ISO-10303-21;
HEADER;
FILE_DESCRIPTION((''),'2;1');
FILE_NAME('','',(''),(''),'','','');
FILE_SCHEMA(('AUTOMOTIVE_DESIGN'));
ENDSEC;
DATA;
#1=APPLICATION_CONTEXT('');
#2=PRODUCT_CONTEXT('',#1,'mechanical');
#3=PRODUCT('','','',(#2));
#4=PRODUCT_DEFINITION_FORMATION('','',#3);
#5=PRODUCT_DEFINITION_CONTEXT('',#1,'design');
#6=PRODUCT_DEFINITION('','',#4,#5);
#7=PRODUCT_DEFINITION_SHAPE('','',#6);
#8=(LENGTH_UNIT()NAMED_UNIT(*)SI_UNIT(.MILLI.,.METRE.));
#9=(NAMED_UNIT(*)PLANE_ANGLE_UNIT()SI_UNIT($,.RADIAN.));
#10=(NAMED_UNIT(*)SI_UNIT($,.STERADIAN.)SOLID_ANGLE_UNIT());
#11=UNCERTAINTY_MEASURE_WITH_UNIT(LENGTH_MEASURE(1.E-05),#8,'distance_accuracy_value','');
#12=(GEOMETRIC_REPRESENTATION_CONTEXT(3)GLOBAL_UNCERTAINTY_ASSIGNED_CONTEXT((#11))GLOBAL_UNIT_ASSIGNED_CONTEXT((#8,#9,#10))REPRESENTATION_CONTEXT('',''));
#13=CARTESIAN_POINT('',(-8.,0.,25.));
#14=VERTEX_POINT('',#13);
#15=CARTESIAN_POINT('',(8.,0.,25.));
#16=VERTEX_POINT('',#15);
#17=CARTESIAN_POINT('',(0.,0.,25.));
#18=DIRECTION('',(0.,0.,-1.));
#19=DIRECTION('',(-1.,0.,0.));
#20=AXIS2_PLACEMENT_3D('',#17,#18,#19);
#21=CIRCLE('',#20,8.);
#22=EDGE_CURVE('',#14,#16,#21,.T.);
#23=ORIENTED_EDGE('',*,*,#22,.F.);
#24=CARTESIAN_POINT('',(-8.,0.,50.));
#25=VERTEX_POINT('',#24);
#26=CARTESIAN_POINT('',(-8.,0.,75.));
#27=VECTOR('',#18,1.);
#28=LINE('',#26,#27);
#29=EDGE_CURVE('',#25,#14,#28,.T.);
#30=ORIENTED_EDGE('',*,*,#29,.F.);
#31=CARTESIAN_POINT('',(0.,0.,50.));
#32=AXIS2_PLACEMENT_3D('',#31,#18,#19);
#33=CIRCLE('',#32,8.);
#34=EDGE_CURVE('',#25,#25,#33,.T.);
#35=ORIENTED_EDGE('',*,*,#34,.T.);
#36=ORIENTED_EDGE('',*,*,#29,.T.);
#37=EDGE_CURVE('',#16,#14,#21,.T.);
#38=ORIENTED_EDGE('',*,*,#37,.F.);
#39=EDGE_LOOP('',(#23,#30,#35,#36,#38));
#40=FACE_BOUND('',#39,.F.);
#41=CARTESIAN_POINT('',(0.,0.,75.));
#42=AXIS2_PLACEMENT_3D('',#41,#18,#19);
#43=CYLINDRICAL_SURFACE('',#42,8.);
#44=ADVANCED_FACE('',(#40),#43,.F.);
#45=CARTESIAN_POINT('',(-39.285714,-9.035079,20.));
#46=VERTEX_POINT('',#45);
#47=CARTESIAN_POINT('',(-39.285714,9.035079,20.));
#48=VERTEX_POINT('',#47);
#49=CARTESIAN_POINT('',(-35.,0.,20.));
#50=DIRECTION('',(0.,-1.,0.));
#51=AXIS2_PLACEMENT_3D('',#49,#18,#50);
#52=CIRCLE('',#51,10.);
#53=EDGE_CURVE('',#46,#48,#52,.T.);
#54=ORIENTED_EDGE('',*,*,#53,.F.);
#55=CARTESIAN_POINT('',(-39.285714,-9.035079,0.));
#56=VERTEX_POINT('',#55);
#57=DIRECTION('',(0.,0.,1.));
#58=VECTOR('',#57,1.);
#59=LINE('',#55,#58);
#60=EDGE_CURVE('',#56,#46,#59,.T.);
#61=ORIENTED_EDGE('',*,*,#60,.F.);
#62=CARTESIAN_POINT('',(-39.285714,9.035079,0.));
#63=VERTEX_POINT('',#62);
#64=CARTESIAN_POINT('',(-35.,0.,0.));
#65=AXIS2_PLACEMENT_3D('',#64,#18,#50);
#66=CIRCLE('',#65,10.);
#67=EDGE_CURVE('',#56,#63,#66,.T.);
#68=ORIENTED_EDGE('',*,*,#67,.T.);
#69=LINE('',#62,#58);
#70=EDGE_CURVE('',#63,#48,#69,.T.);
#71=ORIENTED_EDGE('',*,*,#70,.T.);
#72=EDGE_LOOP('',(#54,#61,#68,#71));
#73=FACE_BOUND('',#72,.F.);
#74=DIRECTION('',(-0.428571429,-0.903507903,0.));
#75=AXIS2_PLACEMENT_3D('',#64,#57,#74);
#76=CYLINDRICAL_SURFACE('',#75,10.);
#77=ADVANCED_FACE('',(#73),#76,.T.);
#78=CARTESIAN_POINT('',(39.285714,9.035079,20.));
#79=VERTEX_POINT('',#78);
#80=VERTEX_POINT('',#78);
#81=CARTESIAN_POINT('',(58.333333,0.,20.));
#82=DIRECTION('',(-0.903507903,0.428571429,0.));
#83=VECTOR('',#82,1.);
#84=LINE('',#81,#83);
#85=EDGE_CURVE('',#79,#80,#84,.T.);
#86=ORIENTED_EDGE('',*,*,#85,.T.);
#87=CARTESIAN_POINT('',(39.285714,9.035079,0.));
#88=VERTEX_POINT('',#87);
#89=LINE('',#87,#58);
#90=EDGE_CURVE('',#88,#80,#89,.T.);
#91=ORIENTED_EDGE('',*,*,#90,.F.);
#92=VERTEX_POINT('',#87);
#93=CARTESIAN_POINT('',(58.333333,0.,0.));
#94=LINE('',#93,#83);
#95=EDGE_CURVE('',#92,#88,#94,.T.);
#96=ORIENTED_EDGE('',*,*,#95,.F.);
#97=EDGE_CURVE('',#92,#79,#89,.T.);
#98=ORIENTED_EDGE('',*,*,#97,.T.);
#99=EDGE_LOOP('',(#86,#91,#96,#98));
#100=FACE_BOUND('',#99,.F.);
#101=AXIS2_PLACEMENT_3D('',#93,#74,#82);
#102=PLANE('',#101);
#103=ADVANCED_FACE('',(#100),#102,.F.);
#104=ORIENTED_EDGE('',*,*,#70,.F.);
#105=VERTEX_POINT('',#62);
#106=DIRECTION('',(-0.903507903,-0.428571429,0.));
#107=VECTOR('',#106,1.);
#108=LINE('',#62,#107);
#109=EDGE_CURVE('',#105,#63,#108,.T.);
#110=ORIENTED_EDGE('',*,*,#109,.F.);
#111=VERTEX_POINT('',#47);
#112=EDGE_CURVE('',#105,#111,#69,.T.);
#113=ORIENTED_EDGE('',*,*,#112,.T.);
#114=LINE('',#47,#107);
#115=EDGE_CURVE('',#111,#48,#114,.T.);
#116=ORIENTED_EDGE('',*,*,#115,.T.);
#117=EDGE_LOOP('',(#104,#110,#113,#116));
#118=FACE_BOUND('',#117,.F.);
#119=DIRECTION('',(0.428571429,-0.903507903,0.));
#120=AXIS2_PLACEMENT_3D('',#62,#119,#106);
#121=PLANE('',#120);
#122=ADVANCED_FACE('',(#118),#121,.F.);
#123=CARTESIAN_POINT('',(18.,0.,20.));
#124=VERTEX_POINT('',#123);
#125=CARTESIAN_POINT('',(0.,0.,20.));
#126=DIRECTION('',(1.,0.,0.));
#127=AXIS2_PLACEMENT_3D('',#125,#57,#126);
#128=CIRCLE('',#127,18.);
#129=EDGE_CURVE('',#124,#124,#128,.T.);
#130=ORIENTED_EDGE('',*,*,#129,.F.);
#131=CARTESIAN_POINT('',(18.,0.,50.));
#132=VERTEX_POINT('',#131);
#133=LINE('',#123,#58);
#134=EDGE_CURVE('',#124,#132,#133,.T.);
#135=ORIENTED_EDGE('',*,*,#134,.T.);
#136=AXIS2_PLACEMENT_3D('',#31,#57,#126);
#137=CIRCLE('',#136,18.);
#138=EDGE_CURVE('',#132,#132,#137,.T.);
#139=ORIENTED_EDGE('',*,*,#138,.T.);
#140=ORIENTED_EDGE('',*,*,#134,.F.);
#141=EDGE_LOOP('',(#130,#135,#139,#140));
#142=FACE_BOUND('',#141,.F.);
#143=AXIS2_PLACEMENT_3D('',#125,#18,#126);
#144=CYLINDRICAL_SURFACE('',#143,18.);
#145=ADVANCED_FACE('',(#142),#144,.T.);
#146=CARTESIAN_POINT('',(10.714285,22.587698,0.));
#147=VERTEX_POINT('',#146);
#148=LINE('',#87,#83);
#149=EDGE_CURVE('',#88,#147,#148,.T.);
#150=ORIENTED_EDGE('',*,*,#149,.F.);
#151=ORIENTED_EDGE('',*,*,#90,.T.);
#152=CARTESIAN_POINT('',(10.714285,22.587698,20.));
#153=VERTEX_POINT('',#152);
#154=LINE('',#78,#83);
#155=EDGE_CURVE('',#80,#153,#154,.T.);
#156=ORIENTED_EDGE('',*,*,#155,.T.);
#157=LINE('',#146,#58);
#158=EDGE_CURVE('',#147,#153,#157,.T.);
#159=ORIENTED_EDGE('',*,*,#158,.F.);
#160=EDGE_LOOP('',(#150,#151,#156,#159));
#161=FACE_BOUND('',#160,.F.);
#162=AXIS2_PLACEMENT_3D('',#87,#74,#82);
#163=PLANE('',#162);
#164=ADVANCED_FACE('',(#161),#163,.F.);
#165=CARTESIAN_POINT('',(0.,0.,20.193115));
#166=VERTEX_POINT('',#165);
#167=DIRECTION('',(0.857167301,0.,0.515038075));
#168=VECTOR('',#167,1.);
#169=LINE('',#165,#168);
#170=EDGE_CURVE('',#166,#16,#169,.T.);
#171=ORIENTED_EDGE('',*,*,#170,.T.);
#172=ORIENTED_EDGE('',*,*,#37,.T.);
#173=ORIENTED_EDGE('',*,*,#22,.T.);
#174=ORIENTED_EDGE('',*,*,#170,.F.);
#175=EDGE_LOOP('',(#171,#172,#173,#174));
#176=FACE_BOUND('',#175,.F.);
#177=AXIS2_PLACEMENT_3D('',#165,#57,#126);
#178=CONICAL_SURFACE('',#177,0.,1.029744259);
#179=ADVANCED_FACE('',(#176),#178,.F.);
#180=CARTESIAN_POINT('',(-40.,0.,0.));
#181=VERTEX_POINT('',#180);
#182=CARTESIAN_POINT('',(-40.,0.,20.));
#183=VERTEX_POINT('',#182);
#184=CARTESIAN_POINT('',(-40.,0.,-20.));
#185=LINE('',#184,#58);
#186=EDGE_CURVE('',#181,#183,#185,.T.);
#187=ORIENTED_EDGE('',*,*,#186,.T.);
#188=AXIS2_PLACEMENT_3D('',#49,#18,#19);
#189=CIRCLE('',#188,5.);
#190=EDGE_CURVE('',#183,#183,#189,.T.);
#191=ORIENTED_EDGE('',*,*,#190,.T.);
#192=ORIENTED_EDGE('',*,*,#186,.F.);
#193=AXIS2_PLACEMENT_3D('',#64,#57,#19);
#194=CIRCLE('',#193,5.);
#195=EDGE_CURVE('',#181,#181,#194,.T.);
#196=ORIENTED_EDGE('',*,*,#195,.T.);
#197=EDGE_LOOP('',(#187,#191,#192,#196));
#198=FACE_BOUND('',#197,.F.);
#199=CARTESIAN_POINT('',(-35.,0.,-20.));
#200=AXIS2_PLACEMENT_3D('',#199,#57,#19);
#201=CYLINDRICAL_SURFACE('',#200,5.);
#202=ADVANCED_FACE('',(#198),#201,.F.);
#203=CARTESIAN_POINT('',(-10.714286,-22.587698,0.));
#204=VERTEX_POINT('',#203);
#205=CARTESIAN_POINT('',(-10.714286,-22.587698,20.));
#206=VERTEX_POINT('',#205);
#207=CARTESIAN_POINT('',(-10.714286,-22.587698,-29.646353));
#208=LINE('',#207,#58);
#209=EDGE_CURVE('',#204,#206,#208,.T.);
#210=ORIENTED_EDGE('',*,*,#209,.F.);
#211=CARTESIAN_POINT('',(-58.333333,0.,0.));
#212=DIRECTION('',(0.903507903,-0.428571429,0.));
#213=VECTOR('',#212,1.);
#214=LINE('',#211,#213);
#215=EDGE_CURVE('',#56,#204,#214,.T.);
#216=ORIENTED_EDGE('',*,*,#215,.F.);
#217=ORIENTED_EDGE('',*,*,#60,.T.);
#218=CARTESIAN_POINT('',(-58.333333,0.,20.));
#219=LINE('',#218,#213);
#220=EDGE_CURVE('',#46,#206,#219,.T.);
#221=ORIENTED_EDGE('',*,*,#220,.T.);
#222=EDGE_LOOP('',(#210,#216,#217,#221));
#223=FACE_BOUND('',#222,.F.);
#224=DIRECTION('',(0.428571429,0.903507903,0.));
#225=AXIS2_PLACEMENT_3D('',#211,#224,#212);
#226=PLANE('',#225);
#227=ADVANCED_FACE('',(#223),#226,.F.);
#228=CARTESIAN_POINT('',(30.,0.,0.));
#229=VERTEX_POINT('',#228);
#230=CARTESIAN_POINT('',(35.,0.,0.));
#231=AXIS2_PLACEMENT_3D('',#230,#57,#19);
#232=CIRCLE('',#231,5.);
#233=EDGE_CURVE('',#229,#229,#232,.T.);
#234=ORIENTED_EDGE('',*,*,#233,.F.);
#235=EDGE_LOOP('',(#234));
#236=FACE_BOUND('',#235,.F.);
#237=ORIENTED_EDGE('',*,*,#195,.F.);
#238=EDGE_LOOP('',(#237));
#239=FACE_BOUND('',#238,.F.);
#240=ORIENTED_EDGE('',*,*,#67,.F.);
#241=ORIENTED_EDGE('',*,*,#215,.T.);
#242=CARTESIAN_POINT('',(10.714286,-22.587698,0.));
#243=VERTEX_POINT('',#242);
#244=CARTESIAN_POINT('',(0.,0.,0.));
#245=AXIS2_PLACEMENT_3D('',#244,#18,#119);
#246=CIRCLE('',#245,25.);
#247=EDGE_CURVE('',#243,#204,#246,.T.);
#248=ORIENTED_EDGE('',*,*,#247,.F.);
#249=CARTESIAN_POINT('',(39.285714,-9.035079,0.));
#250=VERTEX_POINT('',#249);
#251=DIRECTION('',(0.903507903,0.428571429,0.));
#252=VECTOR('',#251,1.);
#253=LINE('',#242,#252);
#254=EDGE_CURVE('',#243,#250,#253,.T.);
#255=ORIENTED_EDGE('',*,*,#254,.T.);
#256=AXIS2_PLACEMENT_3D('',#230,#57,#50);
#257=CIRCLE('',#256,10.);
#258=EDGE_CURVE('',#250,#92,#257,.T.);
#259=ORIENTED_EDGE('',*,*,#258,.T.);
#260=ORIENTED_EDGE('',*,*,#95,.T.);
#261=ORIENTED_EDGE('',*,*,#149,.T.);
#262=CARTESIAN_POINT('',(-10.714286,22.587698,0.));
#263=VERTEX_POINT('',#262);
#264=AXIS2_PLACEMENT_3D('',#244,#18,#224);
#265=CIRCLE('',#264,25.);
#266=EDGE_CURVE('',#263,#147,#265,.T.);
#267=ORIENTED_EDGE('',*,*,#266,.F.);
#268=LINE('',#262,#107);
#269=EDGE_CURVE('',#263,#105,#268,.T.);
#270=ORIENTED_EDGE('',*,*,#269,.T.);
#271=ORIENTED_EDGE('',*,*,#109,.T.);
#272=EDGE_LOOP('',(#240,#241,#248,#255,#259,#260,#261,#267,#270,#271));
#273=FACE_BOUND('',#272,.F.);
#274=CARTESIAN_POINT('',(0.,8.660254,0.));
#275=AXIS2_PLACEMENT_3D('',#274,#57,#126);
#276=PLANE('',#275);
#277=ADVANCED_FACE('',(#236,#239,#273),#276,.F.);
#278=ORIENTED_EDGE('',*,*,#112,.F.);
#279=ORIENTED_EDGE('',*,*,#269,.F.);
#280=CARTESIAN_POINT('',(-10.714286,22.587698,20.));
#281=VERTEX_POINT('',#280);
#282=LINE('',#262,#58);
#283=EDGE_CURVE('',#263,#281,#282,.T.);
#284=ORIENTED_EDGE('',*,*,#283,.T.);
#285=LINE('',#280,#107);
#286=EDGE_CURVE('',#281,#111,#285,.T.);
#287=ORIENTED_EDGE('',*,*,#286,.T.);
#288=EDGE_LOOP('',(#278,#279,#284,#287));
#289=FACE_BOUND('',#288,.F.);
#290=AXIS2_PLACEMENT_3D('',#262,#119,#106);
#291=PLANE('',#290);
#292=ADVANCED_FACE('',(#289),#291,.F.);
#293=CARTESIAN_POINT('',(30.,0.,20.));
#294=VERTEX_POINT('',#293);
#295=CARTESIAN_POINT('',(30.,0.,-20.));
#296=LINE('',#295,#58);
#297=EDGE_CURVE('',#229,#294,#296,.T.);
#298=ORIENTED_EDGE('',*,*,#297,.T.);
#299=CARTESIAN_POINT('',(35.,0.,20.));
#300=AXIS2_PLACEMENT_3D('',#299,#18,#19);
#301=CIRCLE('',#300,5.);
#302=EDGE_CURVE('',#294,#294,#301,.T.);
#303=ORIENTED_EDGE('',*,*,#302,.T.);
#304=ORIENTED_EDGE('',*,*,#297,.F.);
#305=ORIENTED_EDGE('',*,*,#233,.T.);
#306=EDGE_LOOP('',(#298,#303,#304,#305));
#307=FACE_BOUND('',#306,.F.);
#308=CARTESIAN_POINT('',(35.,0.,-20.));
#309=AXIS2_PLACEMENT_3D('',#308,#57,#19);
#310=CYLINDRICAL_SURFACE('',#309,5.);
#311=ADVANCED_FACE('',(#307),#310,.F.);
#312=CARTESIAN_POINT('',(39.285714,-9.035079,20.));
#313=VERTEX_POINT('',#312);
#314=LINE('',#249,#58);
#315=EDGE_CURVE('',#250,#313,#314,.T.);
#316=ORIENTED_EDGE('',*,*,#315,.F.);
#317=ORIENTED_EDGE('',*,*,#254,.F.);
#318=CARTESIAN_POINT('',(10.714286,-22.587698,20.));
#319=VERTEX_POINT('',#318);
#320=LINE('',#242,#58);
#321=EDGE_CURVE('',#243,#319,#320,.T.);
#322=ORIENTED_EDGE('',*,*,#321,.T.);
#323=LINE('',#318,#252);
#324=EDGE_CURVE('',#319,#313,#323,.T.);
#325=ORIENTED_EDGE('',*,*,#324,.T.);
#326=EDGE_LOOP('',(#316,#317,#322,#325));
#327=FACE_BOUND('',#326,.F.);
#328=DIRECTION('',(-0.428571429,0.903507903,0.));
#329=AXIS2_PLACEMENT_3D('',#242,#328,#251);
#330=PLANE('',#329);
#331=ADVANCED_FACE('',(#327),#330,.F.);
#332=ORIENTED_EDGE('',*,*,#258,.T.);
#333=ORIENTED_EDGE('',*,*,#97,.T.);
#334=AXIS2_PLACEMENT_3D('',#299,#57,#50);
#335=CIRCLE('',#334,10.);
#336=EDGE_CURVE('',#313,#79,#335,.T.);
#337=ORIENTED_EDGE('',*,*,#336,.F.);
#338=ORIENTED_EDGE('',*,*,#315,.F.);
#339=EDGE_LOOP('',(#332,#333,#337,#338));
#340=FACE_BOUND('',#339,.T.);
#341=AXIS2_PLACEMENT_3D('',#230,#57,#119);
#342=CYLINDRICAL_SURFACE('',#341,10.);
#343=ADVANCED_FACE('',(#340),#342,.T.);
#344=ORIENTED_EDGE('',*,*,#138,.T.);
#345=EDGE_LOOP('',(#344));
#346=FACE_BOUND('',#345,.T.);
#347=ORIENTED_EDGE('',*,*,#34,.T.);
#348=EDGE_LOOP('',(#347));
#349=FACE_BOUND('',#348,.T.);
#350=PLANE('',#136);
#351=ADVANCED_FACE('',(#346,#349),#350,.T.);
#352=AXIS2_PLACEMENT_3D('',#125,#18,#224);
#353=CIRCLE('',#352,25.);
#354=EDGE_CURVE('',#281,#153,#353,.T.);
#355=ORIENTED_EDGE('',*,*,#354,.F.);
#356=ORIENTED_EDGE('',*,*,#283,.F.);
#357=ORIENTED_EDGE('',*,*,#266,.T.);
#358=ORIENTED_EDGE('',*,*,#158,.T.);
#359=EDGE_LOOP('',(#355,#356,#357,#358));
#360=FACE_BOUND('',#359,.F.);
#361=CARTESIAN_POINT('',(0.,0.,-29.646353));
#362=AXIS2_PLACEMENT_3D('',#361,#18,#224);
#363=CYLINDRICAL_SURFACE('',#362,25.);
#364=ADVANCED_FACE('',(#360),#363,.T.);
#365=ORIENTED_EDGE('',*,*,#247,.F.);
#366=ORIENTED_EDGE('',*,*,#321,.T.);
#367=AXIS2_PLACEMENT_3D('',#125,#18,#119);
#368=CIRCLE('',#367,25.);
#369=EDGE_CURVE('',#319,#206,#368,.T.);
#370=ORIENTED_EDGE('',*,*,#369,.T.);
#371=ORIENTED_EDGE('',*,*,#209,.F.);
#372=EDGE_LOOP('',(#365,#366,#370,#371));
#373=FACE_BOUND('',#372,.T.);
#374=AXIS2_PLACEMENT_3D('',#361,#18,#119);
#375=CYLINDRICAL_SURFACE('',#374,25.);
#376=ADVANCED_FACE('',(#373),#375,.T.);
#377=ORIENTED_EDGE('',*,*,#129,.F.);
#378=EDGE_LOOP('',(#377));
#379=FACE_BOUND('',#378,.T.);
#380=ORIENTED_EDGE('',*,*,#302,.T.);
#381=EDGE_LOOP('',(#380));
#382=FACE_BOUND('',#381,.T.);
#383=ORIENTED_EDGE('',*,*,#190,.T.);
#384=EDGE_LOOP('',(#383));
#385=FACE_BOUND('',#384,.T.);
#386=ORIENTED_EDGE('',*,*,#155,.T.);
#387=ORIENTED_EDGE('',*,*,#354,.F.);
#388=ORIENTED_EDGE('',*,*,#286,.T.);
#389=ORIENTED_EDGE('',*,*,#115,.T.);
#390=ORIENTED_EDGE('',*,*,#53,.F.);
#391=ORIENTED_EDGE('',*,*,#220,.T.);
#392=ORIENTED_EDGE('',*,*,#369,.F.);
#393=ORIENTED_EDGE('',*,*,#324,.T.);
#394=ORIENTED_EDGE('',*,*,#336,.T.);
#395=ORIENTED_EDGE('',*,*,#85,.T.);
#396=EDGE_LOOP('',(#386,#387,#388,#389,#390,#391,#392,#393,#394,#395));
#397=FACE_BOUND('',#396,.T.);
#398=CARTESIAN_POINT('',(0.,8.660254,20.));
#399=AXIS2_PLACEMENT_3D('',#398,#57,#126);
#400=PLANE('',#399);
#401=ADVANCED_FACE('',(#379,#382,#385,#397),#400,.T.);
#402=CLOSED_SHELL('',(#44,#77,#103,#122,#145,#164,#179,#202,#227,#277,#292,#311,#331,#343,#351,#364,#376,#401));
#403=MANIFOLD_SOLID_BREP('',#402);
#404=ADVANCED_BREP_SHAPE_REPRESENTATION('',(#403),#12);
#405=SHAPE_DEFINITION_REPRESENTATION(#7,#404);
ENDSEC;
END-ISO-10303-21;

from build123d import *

# Parameters (mm, degrees)
F1_DEPTH       = 20
F2_R           = 18
F3_DEPTH       = 30
F5_D           = 10
F5_DEPTH       = 20
F5_TIP         = 3.0043030951
F5_ON_F4_D     = 10
F5_ON_F4_DEPTH = 20
F5_ON_F4_TIP   = 3.0043030951
F7_D           = 16
F7_DEPTH       = 25
F7_TIP         = 4.8068849522
F8_T1_DEPTH    = 79.2927061282
F9_R           = 10


# Not quite as in the source:
# - a fillet or chamfer that OpenCascade refuses, or shapes differently, is made with other operations: its cross-section is extruded or revolved along the edge and cut away or added


with BuildPart() as f1:
    # F0 (on Top) → F1 (new body)
    with BuildSketch(Plane.XY):
        with BuildLine():
            Line((-25, 0), (0, 0))
            Line((0, 0), (25, 0))
            ThreePointArc((25, 0), (21.1288562998, 13.3630622038), (10.7142854831, 22.5876976823))
            ThreePointArc((10.7142854831, 22.5876976823), (-9.67e-08, 25), (-10.7142856578, 22.5876975994))
            ThreePointArc((-10.7142856578, 22.5876975994), (-21.1288563515, 13.363062122), (-25, 0))
        make_face()
        with BuildLine():
            Line((25, 0), (0, 0))
            Line((0, 0), (-25, 0))
            ThreePointArc((-25, 0), (-21.128856388, -13.3630620643), (-10.7142857812, -22.5876975409))
            ThreePointArc((-10.7142857812, -22.5876975409), (-4.6e-08, -25), (10.7142856981, -22.5876975803))
            ThreePointArc((10.7142856981, -22.5876975803), (21.1288563634, -13.3630621032), (25, 0))
        make_face()
        with BuildLine():
            ThreePointArc((10.7142854831, 22.5876976823), (21.1288562998, 13.3630622038), (25, 0))
            ThreePointArc((25, 0), (29.6547751302, 8.4515425273), (39.2857142182, 9.0350790611))
            Line((39.2857142182, 9.0350790611), (10.7142854831, 22.5876976823))
        make_face()
        with BuildLine():
            ThreePointArc((39.2857142182, 9.0350790611), (29.6547751302, 8.4515425273), (25, 0))
            ThreePointArc((25, 0), (29.6547751142, -8.4515425172), (39.285714184, -9.0350790773))
            ThreePointArc((39.285714184, -9.0350790773), (43.4515425172, -5.3452248858), (45, 0))
            ThreePointArc((45, 0), (43.4515425273, 5.3452248698), (39.2857142182, 9.0350790611))
        make_face()
        with BuildLine():
            ThreePointArc((39.285714184, -9.0350790773), (29.6547751142, -8.4515425172), (25, 0))
            ThreePointArc((25, 0), (21.1288563634, -13.3630621032), (10.7142856981, -22.5876975803))
            Line((10.7142856981, -22.5876975803), (39.285714184, -9.0350790773))
        make_face()
        with BuildLine():
            ThreePointArc((-39.2857142392, -9.0350790511), (-29.65477514, -8.4515425335), (-25, 0))
            ThreePointArc((-25, 0), (-29.6547751302, 8.4515425273), (-39.2857142182, 9.0350790611))
            ThreePointArc((-39.2857142182, 9.0350790611), (-45, 1.16e-08), (-39.2857142392, -9.0350790511))
        make_face()
        with BuildLine():
            ThreePointArc((-10.7142857812, -22.5876975409), (-21.128856388, -13.3630620643), (-25, 0))
            ThreePointArc((-25, 0), (-29.65477514, -8.4515425335), (-39.2857142392, -9.0350790511))
            Line((-39.2857142392, -9.0350790511), (-10.7142857812, -22.5876975409))
        make_face()
        with BuildLine():
            ThreePointArc((-39.2857142182, 9.0350790611), (-29.6547751302, 8.4515425273), (-25, 0))
            ThreePointArc((-25, 0), (-21.1288563515, 13.363062122), (-10.7142856578, 22.5876975994))
            Line((-10.7142856578, 22.5876975994), (-39.2857142182, 9.0350790611))
        make_face()
        with BuildLine():
            Line((58.3333333333, 0), (39.2857142182, 9.0350790611))
            ThreePointArc((39.2857142182, 9.0350790611), (43.4515425273, 5.3452248698), (45, 0))
            ThreePointArc((45, 0), (43.4515425172, -5.3452248858), (39.285714184, -9.0350790773))
            Line((39.285714184, -9.0350790773), (58.3333333333, 0))
        make_face()
        with BuildLine():
            ThreePointArc((-10.7142856578, 22.5876975994), (-9.67e-08, 25), (10.7142854831, 22.5876976823))
            Line((10.7142854831, 22.5876976823), (0, 27.6699295265))
            Line((0, 27.6699295265), (-10.7142856578, 22.5876975994))
        make_face()
        with BuildLine():
            Line((0, -27.6699295265), (10.7142856981, -22.5876975803))
            ThreePointArc((10.7142856981, -22.5876975803), (-4.6e-08, -25), (-10.7142857812, -22.5876975409))
            Line((-10.7142857812, -22.5876975409), (0, -27.6699295265))
        make_face()
        with BuildLine():
            ThreePointArc((-39.2857142392, -9.0350790511), (-45, 1.16e-08), (-39.2857142182, 9.0350790611))
            Line((-39.2857142182, 9.0350790611), (-58.3333333333, 0))
            Line((-58.3333333333, 0), (-39.2857142392, -9.0350790511))
        make_face()
    extrude(amount=F1_DEPTH)

    # F2 (on face) → F3 (join)
    with BuildSketch(Plane.XY.offset(20)):
        Circle(F2_R)
    extrude(amount=F3_DEPTH)

    # F5
    with Locations(Plane(origin=(0, 0, 0), x_dir=(1, 0, 0), z_dir=(0, 0, -1))):
        with Locations((-35, 0)):
            Hole(F5_D / 2, depth=F5_DEPTH)
            with Locations((0, 0, -(F5_DEPTH + F5_TIP / 2))):  # 118° drill point
                Cone(0, F5_D / 2, F5_TIP, mode=Mode.SUBTRACT)

    # F5 on F4
    with Locations(Plane(origin=(0, 0, 0), x_dir=(1, 0, 0), z_dir=(0, 0, -1))):
        with Locations((35, 0)):
            Hole(F5_ON_F4_D / 2, depth=F5_ON_F4_DEPTH)
            with Locations((0, 0, -(F5_ON_F4_DEPTH + F5_ON_F4_TIP / 2))):  # 118° drill point
                Cone(0, F5_ON_F4_D / 2, F5_ON_F4_TIP, mode=Mode.SUBTRACT)

    # F7
    with Locations(Plane.XY.offset(50)):
        with Locations((0, 0)):
            Hole(F7_D / 2, depth=F7_DEPTH)
            with Locations((0, 0, -(F7_DEPTH + F7_TIP / 2))):  # 118° drill point
                Cone(0, F7_D / 2, F7_TIP, mode=Mode.SUBTRACT)

    # F8: fillet of radius 25 on 2 edges, made by hand

    # F8_s2 → F8_t1 (cut)
    with BuildSketch(Plane.XY.offset(-29.6463530641)):
        with BuildLine():
            ThreePointArc((10.7142857143, -22.5876975726), (0, -25), (-10.7142857143, -22.5876975726))
            Line((-10.7142857143, -22.5876975726), (0, -27.6699295265))
            Line((0, -27.6699295265), (10.7142857143, -22.5876975726))
        make_face()
        with BuildLine():
            ThreePointArc((10.7142857143, 22.5876975726), (0, 25), (-10.7142857143, 22.5876975726))
            Line((-10.7142857143, 22.5876975726), (0, 27.6699295265))
            Line((0, 27.6699295265), (10.7142857143, 22.5876975726))
        make_face()
    extrude(amount=F8_T1_DEPTH, mode=Mode.SUBTRACT)

    # F9
    f9_edges = [f1.edges().sort_by_distance(p)[0] for p in [
        (-58.333333, 0, 10),
        (58.333333, 0, 10),
    ]]
    fillet(f9_edges, radius=F9_R)


solid = f1.part
